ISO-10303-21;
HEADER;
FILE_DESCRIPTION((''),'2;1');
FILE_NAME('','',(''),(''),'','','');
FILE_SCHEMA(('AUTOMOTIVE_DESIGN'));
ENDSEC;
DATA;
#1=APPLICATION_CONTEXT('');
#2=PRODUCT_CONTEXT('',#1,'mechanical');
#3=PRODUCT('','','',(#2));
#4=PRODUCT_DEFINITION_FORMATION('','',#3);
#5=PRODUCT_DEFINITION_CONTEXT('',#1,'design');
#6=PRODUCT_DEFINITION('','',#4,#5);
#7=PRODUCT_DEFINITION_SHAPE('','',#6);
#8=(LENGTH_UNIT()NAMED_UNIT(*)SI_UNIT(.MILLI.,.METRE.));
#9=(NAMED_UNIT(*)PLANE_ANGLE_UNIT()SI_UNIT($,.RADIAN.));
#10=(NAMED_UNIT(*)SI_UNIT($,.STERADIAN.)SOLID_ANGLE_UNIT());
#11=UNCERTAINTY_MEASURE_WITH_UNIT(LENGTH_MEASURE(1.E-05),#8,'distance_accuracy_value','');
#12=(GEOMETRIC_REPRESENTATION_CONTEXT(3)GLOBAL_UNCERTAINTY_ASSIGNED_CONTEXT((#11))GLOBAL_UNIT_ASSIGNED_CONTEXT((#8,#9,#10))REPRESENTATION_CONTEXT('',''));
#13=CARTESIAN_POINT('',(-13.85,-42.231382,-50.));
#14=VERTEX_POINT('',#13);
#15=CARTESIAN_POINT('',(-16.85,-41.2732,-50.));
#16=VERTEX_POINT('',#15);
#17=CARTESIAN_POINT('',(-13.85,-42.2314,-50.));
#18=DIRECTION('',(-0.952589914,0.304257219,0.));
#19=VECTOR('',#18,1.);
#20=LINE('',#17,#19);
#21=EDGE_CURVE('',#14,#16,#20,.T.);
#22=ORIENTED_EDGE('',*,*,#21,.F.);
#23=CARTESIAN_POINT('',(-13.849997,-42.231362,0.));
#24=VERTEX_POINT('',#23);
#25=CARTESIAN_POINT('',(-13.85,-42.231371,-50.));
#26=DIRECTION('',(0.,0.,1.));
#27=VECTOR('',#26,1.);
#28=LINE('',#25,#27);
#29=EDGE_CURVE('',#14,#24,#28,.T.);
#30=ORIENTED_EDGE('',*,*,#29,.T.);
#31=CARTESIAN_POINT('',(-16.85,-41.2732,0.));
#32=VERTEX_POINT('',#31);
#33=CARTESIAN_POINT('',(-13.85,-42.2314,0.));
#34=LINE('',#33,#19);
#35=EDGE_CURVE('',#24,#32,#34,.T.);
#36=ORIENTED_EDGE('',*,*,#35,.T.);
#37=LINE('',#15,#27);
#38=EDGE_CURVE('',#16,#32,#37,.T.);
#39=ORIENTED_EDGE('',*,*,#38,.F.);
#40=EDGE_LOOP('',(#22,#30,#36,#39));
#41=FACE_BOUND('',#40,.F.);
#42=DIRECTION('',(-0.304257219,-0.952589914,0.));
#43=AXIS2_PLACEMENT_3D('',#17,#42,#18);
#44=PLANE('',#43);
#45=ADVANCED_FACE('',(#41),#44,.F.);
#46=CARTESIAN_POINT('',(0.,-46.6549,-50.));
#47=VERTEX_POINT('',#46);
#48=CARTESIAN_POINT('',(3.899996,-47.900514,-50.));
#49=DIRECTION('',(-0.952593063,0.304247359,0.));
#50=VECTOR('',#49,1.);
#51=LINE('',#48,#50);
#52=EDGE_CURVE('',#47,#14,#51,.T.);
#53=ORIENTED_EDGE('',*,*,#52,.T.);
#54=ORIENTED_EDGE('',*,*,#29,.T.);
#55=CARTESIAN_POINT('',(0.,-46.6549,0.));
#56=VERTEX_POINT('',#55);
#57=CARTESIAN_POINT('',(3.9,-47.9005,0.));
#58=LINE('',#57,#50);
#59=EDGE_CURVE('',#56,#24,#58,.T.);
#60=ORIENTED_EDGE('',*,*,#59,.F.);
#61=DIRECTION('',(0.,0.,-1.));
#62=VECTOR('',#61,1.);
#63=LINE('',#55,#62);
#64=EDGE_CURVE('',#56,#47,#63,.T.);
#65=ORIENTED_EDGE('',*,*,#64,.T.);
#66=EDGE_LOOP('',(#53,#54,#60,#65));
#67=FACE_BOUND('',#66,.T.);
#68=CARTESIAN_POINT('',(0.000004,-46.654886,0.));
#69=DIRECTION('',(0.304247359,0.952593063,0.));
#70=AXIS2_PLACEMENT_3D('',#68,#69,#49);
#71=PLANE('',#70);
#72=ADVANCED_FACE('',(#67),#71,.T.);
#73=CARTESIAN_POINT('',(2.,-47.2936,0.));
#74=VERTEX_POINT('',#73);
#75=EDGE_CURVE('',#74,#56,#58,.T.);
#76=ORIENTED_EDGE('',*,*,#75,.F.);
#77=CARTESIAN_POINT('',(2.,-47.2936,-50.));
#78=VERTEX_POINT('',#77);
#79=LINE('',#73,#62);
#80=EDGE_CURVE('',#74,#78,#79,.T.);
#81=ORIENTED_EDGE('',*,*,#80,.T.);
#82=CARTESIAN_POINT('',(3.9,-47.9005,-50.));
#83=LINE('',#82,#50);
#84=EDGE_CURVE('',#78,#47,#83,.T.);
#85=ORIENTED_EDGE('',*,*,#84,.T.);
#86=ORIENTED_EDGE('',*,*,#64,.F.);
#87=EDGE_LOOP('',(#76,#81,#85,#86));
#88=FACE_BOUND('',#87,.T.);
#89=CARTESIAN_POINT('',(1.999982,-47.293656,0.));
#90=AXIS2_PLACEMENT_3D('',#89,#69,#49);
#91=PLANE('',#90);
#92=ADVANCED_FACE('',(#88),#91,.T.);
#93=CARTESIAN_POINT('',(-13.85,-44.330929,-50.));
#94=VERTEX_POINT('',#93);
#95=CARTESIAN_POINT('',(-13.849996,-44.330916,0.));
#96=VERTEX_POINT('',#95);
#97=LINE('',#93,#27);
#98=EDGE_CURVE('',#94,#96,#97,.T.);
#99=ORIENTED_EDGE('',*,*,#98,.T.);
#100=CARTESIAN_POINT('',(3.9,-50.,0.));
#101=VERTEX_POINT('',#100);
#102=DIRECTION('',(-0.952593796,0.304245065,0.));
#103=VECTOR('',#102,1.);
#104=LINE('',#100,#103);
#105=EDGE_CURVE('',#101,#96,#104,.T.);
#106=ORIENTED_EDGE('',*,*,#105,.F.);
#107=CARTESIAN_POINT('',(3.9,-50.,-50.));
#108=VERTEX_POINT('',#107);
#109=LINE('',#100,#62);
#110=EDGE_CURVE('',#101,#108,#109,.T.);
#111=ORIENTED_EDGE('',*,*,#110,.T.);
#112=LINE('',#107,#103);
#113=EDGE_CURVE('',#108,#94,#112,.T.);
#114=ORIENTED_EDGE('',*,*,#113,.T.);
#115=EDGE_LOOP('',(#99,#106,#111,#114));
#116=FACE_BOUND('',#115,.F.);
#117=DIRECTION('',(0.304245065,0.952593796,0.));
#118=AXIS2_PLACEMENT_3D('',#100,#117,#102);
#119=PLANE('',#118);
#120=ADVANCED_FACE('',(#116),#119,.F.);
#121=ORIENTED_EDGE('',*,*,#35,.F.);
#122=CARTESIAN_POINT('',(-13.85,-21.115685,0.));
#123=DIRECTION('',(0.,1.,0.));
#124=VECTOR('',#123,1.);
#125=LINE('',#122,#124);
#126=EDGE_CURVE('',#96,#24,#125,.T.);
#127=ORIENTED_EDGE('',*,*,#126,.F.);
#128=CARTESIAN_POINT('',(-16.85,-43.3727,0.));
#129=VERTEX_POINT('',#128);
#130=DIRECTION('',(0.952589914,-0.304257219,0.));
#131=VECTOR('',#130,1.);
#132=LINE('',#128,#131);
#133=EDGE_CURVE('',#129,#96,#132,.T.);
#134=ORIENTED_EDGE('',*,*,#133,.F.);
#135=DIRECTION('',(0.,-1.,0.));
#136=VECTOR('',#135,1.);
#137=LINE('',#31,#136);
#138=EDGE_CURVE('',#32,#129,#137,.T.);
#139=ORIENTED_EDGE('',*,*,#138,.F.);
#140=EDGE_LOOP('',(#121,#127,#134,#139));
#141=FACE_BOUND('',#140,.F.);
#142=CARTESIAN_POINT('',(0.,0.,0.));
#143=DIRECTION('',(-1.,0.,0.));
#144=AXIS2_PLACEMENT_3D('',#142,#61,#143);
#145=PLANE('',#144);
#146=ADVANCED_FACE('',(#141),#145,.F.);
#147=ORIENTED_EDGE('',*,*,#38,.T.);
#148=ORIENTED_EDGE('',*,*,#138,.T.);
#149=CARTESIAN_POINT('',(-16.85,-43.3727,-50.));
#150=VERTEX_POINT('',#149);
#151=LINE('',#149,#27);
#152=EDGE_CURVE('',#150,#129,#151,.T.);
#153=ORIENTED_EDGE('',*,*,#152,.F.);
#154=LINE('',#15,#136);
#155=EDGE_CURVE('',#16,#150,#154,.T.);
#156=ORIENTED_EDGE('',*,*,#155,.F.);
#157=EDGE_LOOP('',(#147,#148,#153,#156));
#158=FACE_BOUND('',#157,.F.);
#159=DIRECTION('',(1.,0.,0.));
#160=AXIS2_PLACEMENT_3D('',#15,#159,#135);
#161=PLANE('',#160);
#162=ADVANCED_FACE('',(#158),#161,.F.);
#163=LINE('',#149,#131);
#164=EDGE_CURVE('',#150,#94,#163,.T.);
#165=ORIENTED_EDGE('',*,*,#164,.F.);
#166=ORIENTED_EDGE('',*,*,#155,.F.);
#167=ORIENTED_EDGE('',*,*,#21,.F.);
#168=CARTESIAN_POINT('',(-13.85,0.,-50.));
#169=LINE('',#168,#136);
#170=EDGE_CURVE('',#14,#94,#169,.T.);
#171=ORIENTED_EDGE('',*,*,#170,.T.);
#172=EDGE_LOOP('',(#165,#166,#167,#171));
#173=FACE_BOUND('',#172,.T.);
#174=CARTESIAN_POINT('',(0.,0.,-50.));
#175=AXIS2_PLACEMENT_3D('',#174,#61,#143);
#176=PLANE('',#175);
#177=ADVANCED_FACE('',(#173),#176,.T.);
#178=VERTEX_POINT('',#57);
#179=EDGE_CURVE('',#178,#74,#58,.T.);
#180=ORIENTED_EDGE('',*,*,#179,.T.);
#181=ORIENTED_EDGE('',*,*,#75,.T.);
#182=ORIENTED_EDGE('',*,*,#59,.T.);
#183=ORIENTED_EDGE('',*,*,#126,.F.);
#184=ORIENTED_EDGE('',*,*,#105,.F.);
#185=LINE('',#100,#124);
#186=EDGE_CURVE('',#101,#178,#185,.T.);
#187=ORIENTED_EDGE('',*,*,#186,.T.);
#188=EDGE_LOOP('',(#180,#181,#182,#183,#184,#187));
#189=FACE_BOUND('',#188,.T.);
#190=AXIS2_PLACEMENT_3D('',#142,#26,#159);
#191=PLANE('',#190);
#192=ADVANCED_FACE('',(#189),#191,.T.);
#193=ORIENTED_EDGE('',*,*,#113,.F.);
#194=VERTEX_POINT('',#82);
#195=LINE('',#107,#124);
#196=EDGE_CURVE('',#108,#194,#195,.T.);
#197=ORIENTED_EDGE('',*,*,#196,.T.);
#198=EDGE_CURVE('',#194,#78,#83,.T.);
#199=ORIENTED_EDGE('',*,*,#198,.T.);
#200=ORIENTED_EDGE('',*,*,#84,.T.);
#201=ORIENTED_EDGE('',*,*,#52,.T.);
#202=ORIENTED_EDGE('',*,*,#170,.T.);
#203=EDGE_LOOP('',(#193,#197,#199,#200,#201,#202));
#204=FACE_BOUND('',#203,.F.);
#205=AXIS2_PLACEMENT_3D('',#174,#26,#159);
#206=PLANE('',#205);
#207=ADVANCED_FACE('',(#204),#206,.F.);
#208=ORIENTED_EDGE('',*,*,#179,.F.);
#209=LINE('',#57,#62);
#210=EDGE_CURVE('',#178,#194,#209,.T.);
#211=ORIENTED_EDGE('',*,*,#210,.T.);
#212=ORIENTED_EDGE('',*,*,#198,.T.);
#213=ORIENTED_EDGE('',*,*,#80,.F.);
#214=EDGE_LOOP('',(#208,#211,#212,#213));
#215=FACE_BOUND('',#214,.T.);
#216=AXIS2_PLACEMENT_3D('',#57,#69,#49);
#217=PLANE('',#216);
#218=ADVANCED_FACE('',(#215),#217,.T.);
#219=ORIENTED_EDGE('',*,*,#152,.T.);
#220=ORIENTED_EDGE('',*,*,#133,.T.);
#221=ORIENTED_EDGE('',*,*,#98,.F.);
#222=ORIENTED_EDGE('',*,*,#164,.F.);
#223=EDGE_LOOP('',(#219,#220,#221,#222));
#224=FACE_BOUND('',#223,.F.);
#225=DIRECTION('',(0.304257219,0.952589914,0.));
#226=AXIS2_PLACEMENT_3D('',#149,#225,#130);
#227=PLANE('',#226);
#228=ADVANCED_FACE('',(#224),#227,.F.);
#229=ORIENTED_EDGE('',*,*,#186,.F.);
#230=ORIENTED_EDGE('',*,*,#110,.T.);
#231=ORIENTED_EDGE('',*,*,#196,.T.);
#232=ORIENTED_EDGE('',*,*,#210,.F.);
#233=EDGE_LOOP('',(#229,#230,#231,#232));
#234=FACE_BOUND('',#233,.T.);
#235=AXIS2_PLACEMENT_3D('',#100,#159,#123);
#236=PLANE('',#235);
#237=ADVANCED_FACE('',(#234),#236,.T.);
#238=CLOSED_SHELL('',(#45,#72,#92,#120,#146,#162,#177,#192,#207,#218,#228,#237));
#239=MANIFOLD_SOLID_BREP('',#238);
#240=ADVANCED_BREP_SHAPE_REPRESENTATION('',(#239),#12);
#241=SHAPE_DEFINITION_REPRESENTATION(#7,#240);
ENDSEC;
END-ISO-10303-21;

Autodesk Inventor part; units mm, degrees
ref_plane "YZ Plane" through (0, 0, 0) normal (1, 0, 0) x (0, 1, 0)
ref_plane "XZ Plane" through (0, 0, 0) normal (0, 1, 0) x (-1, 0, 0)
ref_plane "XY Plane" through (0, 0, 0) normal (0, 0, 1) x (1, 0, 0)
sketch "Szkic1" plane through (0, 0, 0) normal (0, 0, 1) x (1, 0, 0)
  line L0 (0, -50) -> (2, -50) projected
  circle A0 centre (-3.1, -7) radius 7 projected
  line L1 (3.9, -50) -> (3.9, 0)
  line L2 (3.9, -50) -> (-19.6026, -42.4936)
  line L3 (2, -14) -> (2, -47.2936) projected
  line L4 (0, -14) -> (0, -46.6549) projected
  line L5 (3.9, -47.9005) -> (-27.3591, -37.9167)
  line L6 (-13.8397, -39.3668) -> (-13.1635, -37.9168) projected
  line L7 (-13.8397, -39.3668) -> (-13.8397, -40.8668)
  line L8 (-13.1635, -37.9168) -> (-16.1635, -37.9168)
  line L9 (-17, -41.2253) -> (-17, 0)
  line L10 (-17, 0) -> (-3.1, 0)
  line L11 (-19, -40.5865) -> (-19, 0.0005)
  line L12 (-19, 0.0005) -> (-3.1, 0.0005)
  line L13 (-3.1, -1.9995) -> (-19, -1.9995)
  line L14 (-19, -1.9995) -> (-19, 0.0005)
  line L15 (-19, -40.5865) -> (-19, -42.6861)
  line L16 (0, -14) -> (0, 0) projected
  line L17 (2, -14) -> (0, -14) projected
  line L18 (2, 0) -> (2, -14) projected
  line L19 (0, 0) -> (2, 0) projected
  line L20 (-3.1, 0) -> (0, 0)
  line L21 (-3.1, -1.9995) -> (0, -1.9995)
  line L22 (-19, 0.0005) -> (-17, 0.0005)
  line L23 (-17, 0.0005) -> (-17, -1.9995)
  line L24 (-17, -1.9995) -> (-19, -1.9995)
  line L25 (-19, -1.9995) -> (-19, 0.0005)
  dimension "d0" = 2
  dimension "d1" = 1.5
  dimension "d2" = 3
  dimension "d3" = 2
  dimension "d4" = 2
extrude "Wyciągnięcie proste1" add sketch "Szkic1" against normal blind 50 contours L1 L2 L15 L5 | L16 L21 L13 A0 | A0 L20 L16 | A0 L13 L9 L10 | L9 L13 L11 L12 | L9 L5 L11 L13 picked at (-1.3641, -1.4413)
sketch "Szkic3" plane through (0, 0, -50) normal (0, 0, -1) x (-1, 0, 0)
  line L0 (17, -1.9995) -> (17, -41.2253) projected
  line L1 (17, -41.2253) -> (-3.9, -47.9005) projected
  line L2 (-3.9, -47.9005) -> (-3.9, -50) projected
  line L3 (-3.9, -50) -> (19, -42.6861) projected
  line L4 (19, -42.6861) -> (19, 0.0005) projected
  line L5 (19, 0.0005) -> (17, 0.0005) projected
  line L6 (17, 0.0005) -> (17, 0) projected
  line L7 (17, 0) -> (0, 0) projected
  line L8 (0, 0) -> (0, -1.9995) projected
  line L9 (0, -1.9995) -> (17, -1.9995) projected
  line L10 (12.25, 0) -> (12.25, -47.2936) projected
  line L11 (12.25, -47.2936) -> (13.85, -47.2936) projected
  line L12 (13.85, 0) -> (13.85, -47.2936) projected
  line L13 (12.25, 0) -> (13.85, 0) projected
  point P0 (13.85, -42.2314)
  point P1 (13.85, -44.3309)
extrude "Wyciągnięcie proste3" cut sketch "Szkic3" against normal through all contours L9 L12 L7 L5 L4 L3 L1 L0 | L9 L10 L7 L12 | L9 L8 L7 L10
sketch "Szkic4" plane through (0, 0, -50) normal (0, 0, -1) x (-1, 0, 0)
  line L0 (13.85, -44.3309) -> (13.85, -42.2314) projected
  line L1 (13.85, -42.2314) -> (-3.9, -47.9005) projected
  line L2 (-3.9, -47.9005) -> (-3.9, -50) projected
  line L3 (-3.9, -50) -> (13.85, -44.3309) projected
  line L4 (13.85, -42.2314) -> (16.85, -41.2732)
  line L5 (16.85, -41.2732) -> (16.85, -43.3727)
  line L6 (16.85, -43.3727) -> (13.85, -44.3309)
  point P0 (0, 0)
  dimension "d12" = 3
extrude "Wyciągnięcie proste4" add sketch "Szkic4" against normal blind 50 contours L0 L4 L5 L6
properties part number "nozzz" material "Stal, węglowa"
